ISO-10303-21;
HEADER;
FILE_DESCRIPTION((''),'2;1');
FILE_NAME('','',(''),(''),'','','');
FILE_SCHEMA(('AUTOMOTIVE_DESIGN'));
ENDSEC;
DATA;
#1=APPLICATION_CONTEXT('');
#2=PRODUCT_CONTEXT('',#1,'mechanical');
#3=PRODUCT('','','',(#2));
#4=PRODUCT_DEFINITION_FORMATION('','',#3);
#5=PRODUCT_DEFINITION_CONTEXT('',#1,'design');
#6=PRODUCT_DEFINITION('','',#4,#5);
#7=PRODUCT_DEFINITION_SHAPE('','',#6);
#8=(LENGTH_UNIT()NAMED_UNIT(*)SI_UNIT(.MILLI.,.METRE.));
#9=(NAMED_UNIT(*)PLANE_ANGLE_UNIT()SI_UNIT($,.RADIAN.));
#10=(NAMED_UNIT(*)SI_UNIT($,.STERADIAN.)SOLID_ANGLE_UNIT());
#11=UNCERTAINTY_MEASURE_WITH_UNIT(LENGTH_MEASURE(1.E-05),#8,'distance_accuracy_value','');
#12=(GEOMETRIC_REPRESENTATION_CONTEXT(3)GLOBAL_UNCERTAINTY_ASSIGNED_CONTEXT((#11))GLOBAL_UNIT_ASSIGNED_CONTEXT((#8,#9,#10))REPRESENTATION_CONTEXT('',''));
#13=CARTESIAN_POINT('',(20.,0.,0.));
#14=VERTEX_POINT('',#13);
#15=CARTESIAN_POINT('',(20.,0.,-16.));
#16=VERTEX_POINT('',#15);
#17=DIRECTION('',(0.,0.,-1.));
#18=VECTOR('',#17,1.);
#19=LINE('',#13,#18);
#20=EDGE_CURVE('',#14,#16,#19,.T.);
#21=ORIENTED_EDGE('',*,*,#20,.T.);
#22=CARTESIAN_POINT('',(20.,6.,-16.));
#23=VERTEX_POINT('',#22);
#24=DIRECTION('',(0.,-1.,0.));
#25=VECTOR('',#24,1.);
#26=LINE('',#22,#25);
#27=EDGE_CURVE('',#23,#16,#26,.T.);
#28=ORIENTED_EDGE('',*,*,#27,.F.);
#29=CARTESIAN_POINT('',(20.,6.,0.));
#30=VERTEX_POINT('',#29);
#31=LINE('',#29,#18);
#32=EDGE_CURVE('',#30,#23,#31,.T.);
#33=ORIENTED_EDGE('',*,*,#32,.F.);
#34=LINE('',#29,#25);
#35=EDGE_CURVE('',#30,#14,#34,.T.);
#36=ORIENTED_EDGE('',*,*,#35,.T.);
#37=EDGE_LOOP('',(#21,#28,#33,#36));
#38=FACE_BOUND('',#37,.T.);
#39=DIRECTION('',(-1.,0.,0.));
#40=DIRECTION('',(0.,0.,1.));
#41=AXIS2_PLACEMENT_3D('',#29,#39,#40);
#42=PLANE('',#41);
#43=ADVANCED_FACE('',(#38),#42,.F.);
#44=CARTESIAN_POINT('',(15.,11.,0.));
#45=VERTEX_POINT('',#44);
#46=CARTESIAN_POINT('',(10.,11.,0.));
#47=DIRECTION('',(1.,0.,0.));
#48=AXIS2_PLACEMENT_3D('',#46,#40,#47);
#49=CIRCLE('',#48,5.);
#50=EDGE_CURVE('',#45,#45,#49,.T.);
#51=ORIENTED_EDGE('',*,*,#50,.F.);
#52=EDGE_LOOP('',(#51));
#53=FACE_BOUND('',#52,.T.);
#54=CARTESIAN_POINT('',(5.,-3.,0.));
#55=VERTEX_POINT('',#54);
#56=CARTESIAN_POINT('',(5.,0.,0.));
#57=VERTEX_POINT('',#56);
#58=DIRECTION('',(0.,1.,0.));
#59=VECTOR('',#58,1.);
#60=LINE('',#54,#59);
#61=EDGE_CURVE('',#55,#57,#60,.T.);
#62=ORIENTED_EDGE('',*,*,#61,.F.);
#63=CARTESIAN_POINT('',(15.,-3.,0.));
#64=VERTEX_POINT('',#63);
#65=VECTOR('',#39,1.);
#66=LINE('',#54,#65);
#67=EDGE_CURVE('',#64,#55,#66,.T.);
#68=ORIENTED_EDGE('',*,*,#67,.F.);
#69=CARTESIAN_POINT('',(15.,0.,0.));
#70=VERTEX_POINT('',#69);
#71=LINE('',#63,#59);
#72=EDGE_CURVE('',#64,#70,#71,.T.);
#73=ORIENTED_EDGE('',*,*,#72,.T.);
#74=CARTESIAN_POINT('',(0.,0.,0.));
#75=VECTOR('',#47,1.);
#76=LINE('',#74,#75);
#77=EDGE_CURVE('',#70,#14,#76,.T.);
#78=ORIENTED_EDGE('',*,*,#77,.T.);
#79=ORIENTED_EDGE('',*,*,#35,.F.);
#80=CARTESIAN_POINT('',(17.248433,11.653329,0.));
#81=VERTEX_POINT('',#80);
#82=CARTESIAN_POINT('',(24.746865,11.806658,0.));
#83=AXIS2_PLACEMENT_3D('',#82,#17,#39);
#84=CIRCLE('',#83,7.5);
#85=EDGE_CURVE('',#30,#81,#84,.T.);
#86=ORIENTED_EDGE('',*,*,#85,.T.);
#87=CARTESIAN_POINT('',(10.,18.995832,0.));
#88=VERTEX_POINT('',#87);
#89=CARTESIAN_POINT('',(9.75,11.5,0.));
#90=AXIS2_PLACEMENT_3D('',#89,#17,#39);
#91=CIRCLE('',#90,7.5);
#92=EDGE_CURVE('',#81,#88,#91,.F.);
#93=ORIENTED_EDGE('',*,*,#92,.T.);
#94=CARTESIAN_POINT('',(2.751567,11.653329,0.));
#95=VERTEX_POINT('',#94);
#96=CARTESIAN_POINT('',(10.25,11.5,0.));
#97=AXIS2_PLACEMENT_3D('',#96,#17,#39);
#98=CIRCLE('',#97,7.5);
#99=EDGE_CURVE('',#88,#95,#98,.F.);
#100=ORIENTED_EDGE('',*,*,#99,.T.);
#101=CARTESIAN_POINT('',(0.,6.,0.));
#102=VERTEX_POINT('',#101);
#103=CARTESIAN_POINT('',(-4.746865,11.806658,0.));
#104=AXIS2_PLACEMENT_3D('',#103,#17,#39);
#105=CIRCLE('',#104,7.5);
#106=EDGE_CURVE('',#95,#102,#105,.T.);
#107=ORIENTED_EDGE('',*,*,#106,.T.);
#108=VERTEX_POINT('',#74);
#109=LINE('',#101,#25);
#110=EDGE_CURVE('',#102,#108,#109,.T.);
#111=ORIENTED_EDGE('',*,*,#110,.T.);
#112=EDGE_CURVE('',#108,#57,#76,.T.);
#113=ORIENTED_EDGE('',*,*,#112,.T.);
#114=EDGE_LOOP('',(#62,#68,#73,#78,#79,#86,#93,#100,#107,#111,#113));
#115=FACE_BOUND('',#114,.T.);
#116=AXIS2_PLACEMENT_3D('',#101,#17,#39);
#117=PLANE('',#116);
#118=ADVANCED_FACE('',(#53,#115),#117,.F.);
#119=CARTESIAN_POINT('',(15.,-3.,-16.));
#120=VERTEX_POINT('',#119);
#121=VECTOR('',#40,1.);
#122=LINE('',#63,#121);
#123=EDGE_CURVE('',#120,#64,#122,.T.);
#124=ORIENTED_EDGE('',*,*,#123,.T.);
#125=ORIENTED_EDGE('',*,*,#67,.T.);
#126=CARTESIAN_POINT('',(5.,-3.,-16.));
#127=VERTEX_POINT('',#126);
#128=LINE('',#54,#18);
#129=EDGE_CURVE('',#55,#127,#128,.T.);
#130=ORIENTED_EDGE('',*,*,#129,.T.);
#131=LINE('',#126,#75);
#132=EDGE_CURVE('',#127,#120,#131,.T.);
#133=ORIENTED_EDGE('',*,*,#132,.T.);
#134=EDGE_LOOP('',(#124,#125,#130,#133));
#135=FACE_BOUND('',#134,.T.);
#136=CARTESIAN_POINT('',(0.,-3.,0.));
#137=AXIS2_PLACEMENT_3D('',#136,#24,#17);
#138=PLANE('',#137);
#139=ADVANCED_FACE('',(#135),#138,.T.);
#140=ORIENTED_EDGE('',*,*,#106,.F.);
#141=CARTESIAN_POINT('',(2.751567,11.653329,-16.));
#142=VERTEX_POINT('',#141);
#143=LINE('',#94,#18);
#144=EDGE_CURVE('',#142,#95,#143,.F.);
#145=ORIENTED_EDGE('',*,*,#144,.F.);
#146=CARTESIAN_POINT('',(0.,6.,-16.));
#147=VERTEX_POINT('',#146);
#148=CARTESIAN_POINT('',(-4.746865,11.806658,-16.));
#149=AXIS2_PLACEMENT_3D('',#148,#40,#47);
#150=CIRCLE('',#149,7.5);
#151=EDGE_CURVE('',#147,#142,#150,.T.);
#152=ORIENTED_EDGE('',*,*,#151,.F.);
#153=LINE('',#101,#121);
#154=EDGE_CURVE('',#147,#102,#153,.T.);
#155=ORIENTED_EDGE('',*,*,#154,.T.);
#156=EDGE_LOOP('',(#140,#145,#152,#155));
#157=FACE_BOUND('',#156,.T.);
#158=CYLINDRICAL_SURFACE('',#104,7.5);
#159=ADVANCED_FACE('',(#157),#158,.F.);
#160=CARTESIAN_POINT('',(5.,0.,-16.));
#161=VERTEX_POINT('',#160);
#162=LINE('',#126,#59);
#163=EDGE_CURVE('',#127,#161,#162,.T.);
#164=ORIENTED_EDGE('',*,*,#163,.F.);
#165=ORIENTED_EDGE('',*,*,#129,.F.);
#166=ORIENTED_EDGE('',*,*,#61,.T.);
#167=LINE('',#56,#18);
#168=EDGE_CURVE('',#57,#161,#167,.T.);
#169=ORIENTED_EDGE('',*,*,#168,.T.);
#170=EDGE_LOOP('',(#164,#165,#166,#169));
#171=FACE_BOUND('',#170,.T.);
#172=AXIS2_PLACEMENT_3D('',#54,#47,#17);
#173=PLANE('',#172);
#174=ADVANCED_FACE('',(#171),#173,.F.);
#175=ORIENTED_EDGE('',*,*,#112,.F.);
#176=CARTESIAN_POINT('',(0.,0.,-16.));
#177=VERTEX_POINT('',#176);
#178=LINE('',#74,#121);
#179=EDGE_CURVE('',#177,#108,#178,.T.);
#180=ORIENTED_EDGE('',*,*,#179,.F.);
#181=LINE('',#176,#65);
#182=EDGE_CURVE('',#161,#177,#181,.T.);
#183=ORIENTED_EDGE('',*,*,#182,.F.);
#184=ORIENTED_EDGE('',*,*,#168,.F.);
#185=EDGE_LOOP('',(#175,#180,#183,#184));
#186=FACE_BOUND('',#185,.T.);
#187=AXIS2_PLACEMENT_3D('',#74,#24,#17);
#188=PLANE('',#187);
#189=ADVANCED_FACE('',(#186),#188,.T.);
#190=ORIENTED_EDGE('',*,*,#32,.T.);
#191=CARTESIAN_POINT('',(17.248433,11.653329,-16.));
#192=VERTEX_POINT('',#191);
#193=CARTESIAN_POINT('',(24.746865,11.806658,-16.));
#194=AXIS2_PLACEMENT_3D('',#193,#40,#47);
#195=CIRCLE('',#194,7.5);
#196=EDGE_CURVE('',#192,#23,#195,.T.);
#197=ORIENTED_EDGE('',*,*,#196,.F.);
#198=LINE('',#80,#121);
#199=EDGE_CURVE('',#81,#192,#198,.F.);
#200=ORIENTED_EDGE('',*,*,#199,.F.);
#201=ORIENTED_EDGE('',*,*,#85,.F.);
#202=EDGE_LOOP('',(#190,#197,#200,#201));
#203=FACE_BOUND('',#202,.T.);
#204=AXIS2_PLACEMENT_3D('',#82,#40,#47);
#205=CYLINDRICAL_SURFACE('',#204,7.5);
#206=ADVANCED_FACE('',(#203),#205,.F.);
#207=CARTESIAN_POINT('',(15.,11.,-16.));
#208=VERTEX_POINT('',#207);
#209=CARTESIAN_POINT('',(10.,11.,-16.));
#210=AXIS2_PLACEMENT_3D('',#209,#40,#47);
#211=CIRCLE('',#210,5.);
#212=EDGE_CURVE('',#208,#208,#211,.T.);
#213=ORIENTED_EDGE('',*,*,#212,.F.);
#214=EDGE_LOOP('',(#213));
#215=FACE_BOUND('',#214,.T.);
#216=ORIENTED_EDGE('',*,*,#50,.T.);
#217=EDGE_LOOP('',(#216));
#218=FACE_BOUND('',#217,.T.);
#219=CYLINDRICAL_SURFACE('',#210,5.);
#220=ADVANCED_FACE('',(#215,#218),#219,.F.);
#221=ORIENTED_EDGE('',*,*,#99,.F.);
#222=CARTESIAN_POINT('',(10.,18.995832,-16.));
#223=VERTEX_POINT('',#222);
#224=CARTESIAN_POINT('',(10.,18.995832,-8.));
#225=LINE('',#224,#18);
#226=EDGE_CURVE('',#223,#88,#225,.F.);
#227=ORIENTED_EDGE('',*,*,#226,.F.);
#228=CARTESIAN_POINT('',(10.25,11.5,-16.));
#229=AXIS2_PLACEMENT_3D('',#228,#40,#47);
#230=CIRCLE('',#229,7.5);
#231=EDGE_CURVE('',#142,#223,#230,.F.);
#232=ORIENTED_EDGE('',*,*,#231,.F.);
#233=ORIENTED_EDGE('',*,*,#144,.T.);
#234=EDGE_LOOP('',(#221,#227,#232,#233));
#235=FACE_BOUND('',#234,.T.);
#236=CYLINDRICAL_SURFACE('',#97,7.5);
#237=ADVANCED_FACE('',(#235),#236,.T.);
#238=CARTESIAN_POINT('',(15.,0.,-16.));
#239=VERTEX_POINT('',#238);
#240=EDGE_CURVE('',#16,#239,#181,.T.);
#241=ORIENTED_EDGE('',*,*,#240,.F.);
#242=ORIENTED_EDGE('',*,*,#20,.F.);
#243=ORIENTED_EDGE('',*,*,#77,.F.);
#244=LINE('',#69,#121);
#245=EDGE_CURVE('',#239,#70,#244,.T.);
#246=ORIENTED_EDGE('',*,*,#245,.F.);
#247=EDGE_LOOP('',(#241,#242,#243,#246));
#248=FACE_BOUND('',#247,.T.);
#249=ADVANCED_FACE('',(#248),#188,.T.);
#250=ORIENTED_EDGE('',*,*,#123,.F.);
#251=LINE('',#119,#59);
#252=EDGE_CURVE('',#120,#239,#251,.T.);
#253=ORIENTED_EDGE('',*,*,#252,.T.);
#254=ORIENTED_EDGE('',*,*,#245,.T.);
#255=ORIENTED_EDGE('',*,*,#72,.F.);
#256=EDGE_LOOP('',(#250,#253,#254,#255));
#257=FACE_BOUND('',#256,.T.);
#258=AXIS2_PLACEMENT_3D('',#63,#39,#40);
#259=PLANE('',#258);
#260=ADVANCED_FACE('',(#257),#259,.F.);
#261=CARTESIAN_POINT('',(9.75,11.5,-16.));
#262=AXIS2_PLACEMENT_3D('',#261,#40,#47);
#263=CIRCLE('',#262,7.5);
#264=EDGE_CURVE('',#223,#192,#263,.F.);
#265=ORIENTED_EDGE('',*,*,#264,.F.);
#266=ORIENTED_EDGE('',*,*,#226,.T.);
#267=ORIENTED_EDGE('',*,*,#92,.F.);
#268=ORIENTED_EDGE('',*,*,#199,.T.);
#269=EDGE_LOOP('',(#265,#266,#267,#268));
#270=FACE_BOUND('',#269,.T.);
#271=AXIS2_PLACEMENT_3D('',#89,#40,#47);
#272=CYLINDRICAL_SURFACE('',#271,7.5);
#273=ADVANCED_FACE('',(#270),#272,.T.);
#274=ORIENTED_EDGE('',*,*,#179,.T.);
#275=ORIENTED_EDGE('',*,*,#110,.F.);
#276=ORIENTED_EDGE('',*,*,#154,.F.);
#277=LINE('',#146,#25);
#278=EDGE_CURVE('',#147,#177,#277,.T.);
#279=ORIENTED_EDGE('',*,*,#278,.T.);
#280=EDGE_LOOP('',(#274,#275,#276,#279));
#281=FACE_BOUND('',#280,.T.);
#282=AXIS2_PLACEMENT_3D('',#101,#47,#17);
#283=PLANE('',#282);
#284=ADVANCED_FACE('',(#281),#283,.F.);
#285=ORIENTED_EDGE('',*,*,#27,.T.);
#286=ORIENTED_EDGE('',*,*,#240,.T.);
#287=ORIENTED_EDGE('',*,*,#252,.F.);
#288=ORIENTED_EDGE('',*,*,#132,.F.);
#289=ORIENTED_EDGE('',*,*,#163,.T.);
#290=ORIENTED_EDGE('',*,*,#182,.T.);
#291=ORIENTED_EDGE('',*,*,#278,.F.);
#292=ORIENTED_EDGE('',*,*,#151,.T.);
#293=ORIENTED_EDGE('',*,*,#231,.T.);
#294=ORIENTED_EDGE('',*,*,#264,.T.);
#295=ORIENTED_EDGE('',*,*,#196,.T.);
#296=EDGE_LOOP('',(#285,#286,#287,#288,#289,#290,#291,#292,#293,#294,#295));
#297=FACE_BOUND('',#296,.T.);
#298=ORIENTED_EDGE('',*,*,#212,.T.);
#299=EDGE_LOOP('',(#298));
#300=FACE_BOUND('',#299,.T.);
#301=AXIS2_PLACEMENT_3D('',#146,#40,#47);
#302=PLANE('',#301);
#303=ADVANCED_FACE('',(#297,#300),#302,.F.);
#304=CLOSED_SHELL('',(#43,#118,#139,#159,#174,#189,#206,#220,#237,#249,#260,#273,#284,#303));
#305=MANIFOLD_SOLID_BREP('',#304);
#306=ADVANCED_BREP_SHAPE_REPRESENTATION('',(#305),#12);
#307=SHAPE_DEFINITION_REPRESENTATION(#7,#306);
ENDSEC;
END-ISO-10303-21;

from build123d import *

# Parameters (mm, degrees)
SKETCH6_W           = 20
SKETCH6_H           = 16
BOSS_EXTRUDE5_DEPTH = 6
SKETCH7_W           = 10
SKETCH7_H           = 16
BOSS_EXTRUDE6_DEPTH = 3
SKETCH8_W           = 14.5
SKETCH8_H           = 16
BOSS_EXTRUDE7_DEPTH = 13
SKETCH9_R           = 5
CUT_EXTRUDE1_DEPTH  = 32.890437438
FILLET1_R           = 7.5
FILLET2_R           = 7.5


with BuildPart() as part:
    # Sketch6 → Boss-Extrude5 (new body)
    with BuildSketch(Plane(origin=(0, 0, 0), x_dir=(1, 0, 0), z_dir=(0, 1, 0))):
        with Locations((10, 8)):
            Rectangle(SKETCH6_W, SKETCH6_H)
    extrude(amount=BOSS_EXTRUDE5_DEPTH)

    # Sketch7 → Boss-Extrude6 (add)
    with BuildSketch(Plane.XZ):
        with Locations((10, -8)):
            Rectangle(SKETCH7_W, SKETCH7_H)
    extrude(amount=BOSS_EXTRUDE6_DEPTH)

    # Sketch8 → Boss-Extrude7 (add)
    with BuildSketch(Plane(origin=(0, 6, 0), x_dir=(1, 0, 0), z_dir=(0, 1, 0))):
        with Locations((10, 8)):
            Rectangle(SKETCH8_W, SKETCH8_H)
    extrude(amount=BOSS_EXTRUDE7_DEPTH)

    # Sketch9 → Cut-Extrude1 (cut, through all)
    with BuildSketch(Plane.XY):
        with Locations((10, 11)):
            Circle(SKETCH9_R)
    extrude(amount=-CUT_EXTRUDE1_DEPTH, mode=Mode.SUBTRACT)

    # Fillet1
    # the kernel refuses this fillet: 7.5 mm, written as the material it takes off along each edge
    with BuildSketch(Plane(origin=(17.25, 19, -34.75), x_dir=(-1, 0, 0), z_dir=(0, 0, 1))) as fillet1_piece_1:
        with BuildLine():
            CenterArc((FILLET1_R, FILLET1_R), FILLET1_R, 180, 90)
            Line((0, FILLET1_R), (0, 0))
            Line((0, 0), (FILLET1_R, 0))
        make_face()
    extrude(amount=53.5, mode=Mode.SUBTRACT)
    with BuildSketch(Plane(origin=(2.75, 19, 18.75), x_dir=(0, -1, 0), z_dir=(0, 0, -1))) as fillet1_piece_2:
        with BuildLine():
            CenterArc((FILLET1_R, -FILLET1_R), FILLET1_R, 90, 90)
            Line((0, -FILLET1_R), (0, 0))
            Line((0, 0), (FILLET1_R, 0))
        make_face()
    extrude(amount=53.5, mode=Mode.SUBTRACT)

    # Fillet2
    # the kernel refuses this fillet: 7.5 mm, written as the material it adds along each edge
    with BuildSketch(Plane(origin=(17.25, 6, -16), x_dir=(1, 0, 0), z_dir=(0, 0, 1))) as fillet2_piece_1:
        with BuildLine():
            CenterArc((7.496865043, 5.806657581), FILLET2_R, 181.171427285, 49.563032728)
            Line((-0.001567478, 5.65332879), (-0.75141073, 5.637995911))
            ThreePointArc((-0.75141073, 5.637995911), (-0.75, 5.5), (-0.75, 0))
            Line((-0.75, 0), (0, -0.75))
            ThreePointArc((0, -0.75), (1.375, -0.75), (2.275313496, -0.580665758))
            Line((2.275313496, -0.580665758), (2.75, 0))
        make_face()
    extrude(amount=16)
    with BuildSketch(Plane(origin=(2.75, 6, 0), x_dir=(0.00027726642617420565, 0.9999999615616638, 0), z_dir=(0, 0, -1))) as fillet2_piece_2:
        with BuildLine():
            CenterArc((5.804578729, -7.498474746), FILLET2_R, 91.155541089, 49.563032728)
            Line((-0.000762483, -2.749999894), (-0.581296604, -2.275152409))
            ThreePointArc((-0.581296604, -2.275152409), (-0.750381213, -1.374791997), (-0.749999971, 0.00020795))
            Line((-0.749999971, 0.00020795), (0.00020795, 0.749999971))
            ThreePointArc((0.00020795, 0.749999971), (5.500207738, 0.748475006), (5.638204036, 0.749847475))
            Line((5.638204036, 0.749847475), (5.653329008, 0))
        make_face()
    extrude(amount=16)


solid = part.part
